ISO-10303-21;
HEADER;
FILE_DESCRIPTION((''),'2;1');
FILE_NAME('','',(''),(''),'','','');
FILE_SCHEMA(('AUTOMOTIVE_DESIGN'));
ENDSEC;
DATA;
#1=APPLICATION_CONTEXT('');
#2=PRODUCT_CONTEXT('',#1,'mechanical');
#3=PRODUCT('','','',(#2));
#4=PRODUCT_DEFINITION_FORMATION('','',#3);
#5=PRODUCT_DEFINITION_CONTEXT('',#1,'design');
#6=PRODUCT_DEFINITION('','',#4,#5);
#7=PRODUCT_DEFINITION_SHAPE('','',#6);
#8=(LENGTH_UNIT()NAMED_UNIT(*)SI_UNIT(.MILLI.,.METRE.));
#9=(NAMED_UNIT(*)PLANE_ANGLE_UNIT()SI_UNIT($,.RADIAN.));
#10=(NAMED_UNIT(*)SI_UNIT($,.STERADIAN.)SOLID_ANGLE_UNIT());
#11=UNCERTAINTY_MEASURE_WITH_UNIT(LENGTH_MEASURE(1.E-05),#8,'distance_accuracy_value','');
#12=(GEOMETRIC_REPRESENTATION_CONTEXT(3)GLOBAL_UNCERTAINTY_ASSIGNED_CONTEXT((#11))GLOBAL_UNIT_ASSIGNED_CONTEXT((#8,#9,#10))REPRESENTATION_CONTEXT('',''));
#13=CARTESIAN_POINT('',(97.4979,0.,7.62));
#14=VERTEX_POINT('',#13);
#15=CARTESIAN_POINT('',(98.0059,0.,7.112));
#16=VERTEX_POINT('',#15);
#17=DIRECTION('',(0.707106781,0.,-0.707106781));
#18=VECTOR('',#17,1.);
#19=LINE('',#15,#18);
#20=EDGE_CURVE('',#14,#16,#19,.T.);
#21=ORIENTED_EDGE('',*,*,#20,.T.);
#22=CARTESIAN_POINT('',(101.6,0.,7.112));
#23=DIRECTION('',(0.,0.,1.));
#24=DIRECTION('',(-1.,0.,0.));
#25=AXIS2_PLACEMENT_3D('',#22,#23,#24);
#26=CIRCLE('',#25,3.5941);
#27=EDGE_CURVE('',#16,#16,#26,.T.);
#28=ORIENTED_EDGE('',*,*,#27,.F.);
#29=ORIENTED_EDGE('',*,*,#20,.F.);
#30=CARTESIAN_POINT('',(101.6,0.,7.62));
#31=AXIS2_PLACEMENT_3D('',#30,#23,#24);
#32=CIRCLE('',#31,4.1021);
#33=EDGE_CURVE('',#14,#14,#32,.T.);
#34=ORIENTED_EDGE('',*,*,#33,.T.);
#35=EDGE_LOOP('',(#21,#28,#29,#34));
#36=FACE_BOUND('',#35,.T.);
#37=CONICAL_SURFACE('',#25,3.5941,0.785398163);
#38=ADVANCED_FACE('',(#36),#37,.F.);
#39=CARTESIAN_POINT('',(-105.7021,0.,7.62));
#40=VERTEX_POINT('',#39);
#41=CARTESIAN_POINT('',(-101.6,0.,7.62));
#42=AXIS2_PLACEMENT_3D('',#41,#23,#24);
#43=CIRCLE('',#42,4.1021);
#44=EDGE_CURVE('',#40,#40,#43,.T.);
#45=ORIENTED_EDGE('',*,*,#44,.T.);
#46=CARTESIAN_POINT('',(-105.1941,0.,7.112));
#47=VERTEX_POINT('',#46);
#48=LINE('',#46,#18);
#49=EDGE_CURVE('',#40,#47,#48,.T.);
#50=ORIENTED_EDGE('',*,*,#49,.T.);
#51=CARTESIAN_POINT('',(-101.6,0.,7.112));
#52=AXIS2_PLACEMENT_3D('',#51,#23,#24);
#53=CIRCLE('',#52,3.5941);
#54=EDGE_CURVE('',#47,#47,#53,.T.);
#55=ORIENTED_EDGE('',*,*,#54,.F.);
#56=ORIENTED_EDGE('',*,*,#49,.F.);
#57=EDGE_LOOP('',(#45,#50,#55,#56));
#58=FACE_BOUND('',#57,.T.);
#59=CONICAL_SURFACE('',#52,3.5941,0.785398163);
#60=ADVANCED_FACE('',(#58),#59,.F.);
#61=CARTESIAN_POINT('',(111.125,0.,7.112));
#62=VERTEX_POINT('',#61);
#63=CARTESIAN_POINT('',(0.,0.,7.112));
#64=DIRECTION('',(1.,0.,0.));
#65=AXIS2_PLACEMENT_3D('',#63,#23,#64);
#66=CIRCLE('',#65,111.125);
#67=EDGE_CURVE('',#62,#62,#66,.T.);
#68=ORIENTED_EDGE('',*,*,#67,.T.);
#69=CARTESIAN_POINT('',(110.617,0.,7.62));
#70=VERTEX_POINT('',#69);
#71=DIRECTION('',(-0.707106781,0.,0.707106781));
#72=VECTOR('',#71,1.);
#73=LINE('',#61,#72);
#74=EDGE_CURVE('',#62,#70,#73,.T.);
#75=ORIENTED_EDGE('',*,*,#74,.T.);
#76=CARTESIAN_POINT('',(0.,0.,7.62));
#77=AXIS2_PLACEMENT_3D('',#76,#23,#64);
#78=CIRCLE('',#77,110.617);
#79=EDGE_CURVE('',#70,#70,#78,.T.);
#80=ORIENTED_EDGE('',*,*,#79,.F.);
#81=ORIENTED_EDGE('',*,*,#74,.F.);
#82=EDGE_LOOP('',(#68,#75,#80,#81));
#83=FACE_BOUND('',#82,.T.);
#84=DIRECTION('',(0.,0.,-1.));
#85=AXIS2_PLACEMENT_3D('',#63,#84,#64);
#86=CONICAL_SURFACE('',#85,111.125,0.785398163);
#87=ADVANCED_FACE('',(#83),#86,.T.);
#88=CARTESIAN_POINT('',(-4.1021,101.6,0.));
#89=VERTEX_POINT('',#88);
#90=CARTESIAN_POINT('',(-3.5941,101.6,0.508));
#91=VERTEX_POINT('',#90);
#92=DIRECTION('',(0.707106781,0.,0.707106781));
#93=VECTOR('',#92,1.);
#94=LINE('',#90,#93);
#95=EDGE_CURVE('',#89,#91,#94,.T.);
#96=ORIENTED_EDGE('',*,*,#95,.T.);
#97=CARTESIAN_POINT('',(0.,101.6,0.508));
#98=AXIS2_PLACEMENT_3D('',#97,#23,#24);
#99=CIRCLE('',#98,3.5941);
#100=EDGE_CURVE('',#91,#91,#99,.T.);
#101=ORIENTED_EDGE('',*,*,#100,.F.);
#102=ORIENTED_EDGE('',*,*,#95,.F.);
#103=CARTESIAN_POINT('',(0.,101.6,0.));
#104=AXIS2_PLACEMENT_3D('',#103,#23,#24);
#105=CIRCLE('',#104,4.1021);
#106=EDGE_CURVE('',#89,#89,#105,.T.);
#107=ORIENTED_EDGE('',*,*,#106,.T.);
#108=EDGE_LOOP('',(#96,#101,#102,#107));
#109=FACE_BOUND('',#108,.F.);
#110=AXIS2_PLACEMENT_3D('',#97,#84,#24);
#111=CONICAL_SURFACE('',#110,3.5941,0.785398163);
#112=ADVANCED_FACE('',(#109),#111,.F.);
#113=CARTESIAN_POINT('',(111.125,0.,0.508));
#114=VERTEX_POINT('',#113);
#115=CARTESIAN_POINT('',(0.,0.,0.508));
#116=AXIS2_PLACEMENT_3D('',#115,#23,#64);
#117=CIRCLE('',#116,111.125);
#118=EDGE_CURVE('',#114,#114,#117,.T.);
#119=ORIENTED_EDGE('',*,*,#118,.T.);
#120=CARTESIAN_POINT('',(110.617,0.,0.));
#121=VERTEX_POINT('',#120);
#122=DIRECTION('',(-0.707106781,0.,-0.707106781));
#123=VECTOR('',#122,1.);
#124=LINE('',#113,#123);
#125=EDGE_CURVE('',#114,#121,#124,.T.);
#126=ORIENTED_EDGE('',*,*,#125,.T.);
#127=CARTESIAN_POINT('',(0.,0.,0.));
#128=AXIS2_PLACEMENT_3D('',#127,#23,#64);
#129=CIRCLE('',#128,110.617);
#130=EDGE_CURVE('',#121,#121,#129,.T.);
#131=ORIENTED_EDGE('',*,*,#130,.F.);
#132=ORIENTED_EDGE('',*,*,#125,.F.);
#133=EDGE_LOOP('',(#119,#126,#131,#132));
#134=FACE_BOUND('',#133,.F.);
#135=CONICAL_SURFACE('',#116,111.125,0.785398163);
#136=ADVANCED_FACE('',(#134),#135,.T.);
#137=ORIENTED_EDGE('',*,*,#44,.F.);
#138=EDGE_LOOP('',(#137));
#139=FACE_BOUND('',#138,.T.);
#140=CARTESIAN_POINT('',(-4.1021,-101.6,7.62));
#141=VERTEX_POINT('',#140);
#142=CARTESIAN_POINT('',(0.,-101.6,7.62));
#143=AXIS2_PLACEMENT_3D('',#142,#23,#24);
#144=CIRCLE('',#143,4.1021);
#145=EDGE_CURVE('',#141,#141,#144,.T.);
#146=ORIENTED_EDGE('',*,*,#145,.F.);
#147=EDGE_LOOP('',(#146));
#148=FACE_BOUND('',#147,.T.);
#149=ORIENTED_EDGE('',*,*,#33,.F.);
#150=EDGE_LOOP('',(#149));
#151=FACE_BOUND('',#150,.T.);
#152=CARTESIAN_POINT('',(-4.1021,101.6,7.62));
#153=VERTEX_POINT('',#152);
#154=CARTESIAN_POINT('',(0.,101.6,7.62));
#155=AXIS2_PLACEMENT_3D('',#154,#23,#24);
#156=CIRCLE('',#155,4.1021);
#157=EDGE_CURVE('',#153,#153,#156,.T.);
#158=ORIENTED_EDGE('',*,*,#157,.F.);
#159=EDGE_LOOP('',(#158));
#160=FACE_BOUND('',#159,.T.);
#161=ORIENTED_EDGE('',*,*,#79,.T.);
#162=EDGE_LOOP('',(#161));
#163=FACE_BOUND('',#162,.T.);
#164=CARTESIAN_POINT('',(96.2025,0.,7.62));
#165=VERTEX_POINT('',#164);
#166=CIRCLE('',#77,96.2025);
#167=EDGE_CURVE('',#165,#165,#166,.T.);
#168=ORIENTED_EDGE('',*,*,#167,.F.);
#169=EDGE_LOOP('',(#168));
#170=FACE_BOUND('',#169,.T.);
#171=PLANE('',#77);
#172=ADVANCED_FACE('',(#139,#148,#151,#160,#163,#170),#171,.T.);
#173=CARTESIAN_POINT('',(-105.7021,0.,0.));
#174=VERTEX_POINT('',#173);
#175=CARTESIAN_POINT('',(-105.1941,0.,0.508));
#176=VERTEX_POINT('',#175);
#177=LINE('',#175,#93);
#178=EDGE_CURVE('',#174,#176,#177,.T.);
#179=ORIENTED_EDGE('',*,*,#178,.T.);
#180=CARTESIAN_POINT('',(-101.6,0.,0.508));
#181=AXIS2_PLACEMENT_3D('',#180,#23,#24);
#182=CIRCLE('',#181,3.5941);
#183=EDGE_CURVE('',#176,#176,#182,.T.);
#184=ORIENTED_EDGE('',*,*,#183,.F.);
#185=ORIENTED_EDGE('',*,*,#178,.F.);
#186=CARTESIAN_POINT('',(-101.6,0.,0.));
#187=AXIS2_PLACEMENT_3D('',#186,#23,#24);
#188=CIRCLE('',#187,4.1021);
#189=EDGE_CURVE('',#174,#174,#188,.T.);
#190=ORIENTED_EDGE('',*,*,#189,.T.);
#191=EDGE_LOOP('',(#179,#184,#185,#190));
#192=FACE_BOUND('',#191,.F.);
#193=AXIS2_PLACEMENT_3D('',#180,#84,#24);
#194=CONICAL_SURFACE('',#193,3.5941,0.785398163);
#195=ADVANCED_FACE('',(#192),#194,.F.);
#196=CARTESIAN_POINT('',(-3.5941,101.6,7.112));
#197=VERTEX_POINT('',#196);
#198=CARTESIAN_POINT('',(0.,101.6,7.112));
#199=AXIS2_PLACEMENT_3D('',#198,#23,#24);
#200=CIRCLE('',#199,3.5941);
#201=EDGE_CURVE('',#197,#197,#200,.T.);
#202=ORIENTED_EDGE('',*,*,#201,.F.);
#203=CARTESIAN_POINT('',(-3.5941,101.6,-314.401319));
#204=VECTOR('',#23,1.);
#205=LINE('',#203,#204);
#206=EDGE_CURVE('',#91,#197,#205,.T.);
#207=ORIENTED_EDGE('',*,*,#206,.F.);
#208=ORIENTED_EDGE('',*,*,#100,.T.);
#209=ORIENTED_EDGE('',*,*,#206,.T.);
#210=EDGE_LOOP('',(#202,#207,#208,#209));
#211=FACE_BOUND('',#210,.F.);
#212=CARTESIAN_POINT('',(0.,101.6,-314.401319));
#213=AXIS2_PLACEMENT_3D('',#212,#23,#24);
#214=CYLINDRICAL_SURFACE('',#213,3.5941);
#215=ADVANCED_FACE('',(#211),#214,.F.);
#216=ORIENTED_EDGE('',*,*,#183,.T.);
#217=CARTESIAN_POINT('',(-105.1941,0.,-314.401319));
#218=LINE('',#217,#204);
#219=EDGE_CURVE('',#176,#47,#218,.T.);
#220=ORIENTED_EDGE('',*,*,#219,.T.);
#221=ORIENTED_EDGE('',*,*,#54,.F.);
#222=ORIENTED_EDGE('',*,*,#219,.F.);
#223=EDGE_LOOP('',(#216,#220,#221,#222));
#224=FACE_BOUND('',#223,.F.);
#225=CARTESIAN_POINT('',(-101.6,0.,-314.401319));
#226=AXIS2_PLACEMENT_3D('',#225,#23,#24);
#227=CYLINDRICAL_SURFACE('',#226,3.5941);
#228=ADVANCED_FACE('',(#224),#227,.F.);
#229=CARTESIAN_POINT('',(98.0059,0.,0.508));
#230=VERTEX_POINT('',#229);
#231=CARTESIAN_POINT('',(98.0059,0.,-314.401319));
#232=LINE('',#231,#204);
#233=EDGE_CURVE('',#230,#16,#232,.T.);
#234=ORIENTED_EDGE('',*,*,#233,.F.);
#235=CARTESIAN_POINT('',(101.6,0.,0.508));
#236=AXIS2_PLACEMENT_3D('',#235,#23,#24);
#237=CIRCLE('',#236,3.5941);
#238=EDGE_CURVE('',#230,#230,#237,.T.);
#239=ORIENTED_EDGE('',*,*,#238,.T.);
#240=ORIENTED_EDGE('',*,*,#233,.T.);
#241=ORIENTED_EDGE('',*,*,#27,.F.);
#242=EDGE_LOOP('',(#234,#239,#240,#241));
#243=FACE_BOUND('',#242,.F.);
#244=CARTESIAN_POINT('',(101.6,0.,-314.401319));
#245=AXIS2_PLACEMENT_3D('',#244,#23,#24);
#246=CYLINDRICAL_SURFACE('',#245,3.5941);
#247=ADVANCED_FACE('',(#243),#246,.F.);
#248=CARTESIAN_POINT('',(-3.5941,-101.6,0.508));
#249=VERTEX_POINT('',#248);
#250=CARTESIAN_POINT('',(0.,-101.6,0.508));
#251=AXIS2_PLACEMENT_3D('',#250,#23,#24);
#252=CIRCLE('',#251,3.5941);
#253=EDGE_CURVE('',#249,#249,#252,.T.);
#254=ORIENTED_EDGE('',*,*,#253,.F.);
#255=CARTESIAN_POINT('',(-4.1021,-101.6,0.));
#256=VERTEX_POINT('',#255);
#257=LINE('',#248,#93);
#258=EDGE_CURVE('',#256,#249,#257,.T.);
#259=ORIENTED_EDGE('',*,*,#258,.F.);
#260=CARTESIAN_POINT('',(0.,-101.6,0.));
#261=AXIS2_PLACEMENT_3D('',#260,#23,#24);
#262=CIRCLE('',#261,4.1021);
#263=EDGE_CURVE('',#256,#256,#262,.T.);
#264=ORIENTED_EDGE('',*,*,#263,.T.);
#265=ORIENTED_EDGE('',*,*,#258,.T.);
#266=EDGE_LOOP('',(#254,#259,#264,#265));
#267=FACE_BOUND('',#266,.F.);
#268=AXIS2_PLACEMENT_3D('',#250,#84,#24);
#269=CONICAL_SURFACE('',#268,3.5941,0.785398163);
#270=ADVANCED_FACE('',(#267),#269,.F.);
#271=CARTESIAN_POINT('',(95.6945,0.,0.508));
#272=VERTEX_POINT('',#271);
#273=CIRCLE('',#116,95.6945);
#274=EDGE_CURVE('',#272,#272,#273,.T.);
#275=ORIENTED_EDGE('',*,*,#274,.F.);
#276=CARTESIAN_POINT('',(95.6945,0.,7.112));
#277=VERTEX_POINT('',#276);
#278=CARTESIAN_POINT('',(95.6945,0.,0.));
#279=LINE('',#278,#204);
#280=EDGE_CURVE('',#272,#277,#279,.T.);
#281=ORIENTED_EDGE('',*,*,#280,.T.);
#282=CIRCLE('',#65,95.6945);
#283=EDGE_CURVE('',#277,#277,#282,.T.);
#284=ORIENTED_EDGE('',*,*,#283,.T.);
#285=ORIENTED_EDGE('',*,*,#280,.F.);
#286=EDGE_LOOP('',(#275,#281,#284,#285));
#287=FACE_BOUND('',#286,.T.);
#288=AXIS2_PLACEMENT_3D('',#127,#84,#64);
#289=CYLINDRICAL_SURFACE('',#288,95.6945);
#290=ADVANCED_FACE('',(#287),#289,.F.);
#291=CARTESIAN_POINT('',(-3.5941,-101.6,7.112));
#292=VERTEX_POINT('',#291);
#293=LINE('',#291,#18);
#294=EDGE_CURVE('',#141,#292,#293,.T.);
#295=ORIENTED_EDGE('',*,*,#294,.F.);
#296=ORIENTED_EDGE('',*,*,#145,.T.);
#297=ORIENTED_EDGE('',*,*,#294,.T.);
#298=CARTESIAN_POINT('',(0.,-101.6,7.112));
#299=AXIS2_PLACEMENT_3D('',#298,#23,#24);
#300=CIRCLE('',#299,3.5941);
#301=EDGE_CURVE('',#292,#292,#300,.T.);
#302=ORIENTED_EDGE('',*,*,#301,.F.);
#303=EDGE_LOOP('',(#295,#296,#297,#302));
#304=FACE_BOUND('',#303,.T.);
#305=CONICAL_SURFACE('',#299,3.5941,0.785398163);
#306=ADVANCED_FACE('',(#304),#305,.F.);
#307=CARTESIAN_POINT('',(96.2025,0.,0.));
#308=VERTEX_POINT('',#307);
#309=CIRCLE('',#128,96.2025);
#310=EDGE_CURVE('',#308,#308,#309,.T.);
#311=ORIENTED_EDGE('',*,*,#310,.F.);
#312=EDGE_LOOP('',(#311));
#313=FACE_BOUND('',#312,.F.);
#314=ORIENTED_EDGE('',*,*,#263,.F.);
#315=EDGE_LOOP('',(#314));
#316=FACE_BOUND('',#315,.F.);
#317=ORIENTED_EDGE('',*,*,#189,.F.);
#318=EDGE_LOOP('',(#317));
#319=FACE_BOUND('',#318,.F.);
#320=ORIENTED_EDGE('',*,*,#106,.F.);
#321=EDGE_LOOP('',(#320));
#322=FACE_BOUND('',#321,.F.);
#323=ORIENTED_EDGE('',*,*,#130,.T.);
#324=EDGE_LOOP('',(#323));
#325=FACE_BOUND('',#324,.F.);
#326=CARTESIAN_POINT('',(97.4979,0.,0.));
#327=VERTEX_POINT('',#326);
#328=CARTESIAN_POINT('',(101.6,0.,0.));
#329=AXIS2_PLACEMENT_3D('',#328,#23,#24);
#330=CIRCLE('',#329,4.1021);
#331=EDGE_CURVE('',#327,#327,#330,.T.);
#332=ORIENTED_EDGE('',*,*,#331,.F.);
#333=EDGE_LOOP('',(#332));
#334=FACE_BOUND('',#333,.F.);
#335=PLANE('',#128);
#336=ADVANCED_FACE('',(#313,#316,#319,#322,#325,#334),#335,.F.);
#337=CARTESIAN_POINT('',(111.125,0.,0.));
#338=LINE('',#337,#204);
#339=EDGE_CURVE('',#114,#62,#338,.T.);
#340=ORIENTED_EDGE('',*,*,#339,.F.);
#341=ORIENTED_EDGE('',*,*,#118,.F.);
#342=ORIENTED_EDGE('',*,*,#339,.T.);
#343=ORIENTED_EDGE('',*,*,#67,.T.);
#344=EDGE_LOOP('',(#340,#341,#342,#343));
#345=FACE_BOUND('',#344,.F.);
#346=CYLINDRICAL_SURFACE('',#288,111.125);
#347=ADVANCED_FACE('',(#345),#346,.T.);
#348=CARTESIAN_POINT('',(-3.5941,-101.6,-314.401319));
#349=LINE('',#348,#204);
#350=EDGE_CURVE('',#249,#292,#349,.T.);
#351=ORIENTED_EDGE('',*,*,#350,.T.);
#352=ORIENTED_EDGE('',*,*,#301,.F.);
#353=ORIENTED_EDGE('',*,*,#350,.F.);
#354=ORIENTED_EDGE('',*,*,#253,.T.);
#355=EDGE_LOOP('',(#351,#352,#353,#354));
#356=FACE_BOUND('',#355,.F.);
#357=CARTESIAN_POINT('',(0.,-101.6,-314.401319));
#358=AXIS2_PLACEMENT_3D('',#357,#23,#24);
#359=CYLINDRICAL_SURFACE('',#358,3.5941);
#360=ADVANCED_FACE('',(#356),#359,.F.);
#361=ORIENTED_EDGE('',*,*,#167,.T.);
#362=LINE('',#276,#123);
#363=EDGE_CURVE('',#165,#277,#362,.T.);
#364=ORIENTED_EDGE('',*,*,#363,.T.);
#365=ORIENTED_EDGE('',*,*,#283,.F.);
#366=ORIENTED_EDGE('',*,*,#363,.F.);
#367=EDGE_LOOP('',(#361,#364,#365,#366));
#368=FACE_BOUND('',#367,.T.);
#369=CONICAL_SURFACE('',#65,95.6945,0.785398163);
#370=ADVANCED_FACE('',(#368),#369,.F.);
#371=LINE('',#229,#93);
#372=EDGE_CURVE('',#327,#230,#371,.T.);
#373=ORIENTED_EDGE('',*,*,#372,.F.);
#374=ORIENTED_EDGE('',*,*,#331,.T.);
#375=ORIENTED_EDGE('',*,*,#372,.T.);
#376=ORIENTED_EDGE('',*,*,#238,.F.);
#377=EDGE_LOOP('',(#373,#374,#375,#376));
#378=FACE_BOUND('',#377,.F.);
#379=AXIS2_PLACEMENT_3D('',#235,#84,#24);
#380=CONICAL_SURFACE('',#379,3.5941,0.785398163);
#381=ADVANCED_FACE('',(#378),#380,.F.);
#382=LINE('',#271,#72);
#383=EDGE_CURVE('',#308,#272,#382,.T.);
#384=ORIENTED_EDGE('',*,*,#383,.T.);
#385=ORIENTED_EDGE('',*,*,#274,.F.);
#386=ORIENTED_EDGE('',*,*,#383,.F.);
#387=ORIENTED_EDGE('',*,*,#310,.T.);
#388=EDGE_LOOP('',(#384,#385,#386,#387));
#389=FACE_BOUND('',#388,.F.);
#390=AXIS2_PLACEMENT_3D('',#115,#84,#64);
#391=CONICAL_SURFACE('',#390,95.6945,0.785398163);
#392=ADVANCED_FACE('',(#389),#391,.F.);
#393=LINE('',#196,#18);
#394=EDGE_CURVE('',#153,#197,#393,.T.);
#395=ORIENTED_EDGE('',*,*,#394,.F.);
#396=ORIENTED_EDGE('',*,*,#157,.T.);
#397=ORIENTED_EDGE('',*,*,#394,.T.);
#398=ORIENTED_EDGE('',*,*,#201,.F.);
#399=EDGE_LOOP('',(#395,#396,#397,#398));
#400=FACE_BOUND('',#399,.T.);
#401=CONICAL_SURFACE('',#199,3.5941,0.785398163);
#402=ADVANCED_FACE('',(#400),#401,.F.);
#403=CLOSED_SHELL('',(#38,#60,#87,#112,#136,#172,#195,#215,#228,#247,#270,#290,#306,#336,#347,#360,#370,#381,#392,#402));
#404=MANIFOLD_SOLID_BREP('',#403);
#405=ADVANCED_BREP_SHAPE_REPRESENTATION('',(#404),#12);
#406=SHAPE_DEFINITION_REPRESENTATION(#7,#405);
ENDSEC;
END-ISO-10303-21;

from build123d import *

# Parameters (mm, degrees)
F0_R     = 111.125
F0_R_2   = 95.6945
F1_DEPTH = 7.62
F3_D     = 7.1882
F4_SIZE  = 0.508


with BuildPart() as f1:
    # F0 (on Top) → F1 (new body)
    with BuildSketch(Plane.XY):
        Circle(F0_R)
        Circle(F0_R_2, mode=Mode.SUBTRACT)
    extrude(amount=F1_DEPTH)

    # F3 (through all)
    with Locations(Plane(origin=(0, 0, 0), x_dir=(1, 0, 0), z_dir=(0, 0, -1))):
        with Locations((-101.6, 0), (0, -101.6), (101.6, 0), (0, 101.6)):
            Hole(F3_D / 2)

    # F4
    f4_edges = [f1.edges().sort_by_distance(p)[0] for p in [
        (-111.125, 0, 7.62),
        (-95.6945, 0, 0),
        (-95.6945, 0, 7.62),
        (-111.125, 0, 0),
        (-3.5941, -101.6, 0),
        (-105.1941, 0, 0),
        (98.0059, 0, 0),
        (-3.5941, 101.6, 0),
        (-3.5941, -101.6, 7.62),
        (-105.1941, 0, 7.62),
        (98.0059, 0, 7.62),
        (-3.5941, 101.6, 7.62),
    ]]
    chamfer(f4_edges, length=F4_SIZE)


solid = f1.part
